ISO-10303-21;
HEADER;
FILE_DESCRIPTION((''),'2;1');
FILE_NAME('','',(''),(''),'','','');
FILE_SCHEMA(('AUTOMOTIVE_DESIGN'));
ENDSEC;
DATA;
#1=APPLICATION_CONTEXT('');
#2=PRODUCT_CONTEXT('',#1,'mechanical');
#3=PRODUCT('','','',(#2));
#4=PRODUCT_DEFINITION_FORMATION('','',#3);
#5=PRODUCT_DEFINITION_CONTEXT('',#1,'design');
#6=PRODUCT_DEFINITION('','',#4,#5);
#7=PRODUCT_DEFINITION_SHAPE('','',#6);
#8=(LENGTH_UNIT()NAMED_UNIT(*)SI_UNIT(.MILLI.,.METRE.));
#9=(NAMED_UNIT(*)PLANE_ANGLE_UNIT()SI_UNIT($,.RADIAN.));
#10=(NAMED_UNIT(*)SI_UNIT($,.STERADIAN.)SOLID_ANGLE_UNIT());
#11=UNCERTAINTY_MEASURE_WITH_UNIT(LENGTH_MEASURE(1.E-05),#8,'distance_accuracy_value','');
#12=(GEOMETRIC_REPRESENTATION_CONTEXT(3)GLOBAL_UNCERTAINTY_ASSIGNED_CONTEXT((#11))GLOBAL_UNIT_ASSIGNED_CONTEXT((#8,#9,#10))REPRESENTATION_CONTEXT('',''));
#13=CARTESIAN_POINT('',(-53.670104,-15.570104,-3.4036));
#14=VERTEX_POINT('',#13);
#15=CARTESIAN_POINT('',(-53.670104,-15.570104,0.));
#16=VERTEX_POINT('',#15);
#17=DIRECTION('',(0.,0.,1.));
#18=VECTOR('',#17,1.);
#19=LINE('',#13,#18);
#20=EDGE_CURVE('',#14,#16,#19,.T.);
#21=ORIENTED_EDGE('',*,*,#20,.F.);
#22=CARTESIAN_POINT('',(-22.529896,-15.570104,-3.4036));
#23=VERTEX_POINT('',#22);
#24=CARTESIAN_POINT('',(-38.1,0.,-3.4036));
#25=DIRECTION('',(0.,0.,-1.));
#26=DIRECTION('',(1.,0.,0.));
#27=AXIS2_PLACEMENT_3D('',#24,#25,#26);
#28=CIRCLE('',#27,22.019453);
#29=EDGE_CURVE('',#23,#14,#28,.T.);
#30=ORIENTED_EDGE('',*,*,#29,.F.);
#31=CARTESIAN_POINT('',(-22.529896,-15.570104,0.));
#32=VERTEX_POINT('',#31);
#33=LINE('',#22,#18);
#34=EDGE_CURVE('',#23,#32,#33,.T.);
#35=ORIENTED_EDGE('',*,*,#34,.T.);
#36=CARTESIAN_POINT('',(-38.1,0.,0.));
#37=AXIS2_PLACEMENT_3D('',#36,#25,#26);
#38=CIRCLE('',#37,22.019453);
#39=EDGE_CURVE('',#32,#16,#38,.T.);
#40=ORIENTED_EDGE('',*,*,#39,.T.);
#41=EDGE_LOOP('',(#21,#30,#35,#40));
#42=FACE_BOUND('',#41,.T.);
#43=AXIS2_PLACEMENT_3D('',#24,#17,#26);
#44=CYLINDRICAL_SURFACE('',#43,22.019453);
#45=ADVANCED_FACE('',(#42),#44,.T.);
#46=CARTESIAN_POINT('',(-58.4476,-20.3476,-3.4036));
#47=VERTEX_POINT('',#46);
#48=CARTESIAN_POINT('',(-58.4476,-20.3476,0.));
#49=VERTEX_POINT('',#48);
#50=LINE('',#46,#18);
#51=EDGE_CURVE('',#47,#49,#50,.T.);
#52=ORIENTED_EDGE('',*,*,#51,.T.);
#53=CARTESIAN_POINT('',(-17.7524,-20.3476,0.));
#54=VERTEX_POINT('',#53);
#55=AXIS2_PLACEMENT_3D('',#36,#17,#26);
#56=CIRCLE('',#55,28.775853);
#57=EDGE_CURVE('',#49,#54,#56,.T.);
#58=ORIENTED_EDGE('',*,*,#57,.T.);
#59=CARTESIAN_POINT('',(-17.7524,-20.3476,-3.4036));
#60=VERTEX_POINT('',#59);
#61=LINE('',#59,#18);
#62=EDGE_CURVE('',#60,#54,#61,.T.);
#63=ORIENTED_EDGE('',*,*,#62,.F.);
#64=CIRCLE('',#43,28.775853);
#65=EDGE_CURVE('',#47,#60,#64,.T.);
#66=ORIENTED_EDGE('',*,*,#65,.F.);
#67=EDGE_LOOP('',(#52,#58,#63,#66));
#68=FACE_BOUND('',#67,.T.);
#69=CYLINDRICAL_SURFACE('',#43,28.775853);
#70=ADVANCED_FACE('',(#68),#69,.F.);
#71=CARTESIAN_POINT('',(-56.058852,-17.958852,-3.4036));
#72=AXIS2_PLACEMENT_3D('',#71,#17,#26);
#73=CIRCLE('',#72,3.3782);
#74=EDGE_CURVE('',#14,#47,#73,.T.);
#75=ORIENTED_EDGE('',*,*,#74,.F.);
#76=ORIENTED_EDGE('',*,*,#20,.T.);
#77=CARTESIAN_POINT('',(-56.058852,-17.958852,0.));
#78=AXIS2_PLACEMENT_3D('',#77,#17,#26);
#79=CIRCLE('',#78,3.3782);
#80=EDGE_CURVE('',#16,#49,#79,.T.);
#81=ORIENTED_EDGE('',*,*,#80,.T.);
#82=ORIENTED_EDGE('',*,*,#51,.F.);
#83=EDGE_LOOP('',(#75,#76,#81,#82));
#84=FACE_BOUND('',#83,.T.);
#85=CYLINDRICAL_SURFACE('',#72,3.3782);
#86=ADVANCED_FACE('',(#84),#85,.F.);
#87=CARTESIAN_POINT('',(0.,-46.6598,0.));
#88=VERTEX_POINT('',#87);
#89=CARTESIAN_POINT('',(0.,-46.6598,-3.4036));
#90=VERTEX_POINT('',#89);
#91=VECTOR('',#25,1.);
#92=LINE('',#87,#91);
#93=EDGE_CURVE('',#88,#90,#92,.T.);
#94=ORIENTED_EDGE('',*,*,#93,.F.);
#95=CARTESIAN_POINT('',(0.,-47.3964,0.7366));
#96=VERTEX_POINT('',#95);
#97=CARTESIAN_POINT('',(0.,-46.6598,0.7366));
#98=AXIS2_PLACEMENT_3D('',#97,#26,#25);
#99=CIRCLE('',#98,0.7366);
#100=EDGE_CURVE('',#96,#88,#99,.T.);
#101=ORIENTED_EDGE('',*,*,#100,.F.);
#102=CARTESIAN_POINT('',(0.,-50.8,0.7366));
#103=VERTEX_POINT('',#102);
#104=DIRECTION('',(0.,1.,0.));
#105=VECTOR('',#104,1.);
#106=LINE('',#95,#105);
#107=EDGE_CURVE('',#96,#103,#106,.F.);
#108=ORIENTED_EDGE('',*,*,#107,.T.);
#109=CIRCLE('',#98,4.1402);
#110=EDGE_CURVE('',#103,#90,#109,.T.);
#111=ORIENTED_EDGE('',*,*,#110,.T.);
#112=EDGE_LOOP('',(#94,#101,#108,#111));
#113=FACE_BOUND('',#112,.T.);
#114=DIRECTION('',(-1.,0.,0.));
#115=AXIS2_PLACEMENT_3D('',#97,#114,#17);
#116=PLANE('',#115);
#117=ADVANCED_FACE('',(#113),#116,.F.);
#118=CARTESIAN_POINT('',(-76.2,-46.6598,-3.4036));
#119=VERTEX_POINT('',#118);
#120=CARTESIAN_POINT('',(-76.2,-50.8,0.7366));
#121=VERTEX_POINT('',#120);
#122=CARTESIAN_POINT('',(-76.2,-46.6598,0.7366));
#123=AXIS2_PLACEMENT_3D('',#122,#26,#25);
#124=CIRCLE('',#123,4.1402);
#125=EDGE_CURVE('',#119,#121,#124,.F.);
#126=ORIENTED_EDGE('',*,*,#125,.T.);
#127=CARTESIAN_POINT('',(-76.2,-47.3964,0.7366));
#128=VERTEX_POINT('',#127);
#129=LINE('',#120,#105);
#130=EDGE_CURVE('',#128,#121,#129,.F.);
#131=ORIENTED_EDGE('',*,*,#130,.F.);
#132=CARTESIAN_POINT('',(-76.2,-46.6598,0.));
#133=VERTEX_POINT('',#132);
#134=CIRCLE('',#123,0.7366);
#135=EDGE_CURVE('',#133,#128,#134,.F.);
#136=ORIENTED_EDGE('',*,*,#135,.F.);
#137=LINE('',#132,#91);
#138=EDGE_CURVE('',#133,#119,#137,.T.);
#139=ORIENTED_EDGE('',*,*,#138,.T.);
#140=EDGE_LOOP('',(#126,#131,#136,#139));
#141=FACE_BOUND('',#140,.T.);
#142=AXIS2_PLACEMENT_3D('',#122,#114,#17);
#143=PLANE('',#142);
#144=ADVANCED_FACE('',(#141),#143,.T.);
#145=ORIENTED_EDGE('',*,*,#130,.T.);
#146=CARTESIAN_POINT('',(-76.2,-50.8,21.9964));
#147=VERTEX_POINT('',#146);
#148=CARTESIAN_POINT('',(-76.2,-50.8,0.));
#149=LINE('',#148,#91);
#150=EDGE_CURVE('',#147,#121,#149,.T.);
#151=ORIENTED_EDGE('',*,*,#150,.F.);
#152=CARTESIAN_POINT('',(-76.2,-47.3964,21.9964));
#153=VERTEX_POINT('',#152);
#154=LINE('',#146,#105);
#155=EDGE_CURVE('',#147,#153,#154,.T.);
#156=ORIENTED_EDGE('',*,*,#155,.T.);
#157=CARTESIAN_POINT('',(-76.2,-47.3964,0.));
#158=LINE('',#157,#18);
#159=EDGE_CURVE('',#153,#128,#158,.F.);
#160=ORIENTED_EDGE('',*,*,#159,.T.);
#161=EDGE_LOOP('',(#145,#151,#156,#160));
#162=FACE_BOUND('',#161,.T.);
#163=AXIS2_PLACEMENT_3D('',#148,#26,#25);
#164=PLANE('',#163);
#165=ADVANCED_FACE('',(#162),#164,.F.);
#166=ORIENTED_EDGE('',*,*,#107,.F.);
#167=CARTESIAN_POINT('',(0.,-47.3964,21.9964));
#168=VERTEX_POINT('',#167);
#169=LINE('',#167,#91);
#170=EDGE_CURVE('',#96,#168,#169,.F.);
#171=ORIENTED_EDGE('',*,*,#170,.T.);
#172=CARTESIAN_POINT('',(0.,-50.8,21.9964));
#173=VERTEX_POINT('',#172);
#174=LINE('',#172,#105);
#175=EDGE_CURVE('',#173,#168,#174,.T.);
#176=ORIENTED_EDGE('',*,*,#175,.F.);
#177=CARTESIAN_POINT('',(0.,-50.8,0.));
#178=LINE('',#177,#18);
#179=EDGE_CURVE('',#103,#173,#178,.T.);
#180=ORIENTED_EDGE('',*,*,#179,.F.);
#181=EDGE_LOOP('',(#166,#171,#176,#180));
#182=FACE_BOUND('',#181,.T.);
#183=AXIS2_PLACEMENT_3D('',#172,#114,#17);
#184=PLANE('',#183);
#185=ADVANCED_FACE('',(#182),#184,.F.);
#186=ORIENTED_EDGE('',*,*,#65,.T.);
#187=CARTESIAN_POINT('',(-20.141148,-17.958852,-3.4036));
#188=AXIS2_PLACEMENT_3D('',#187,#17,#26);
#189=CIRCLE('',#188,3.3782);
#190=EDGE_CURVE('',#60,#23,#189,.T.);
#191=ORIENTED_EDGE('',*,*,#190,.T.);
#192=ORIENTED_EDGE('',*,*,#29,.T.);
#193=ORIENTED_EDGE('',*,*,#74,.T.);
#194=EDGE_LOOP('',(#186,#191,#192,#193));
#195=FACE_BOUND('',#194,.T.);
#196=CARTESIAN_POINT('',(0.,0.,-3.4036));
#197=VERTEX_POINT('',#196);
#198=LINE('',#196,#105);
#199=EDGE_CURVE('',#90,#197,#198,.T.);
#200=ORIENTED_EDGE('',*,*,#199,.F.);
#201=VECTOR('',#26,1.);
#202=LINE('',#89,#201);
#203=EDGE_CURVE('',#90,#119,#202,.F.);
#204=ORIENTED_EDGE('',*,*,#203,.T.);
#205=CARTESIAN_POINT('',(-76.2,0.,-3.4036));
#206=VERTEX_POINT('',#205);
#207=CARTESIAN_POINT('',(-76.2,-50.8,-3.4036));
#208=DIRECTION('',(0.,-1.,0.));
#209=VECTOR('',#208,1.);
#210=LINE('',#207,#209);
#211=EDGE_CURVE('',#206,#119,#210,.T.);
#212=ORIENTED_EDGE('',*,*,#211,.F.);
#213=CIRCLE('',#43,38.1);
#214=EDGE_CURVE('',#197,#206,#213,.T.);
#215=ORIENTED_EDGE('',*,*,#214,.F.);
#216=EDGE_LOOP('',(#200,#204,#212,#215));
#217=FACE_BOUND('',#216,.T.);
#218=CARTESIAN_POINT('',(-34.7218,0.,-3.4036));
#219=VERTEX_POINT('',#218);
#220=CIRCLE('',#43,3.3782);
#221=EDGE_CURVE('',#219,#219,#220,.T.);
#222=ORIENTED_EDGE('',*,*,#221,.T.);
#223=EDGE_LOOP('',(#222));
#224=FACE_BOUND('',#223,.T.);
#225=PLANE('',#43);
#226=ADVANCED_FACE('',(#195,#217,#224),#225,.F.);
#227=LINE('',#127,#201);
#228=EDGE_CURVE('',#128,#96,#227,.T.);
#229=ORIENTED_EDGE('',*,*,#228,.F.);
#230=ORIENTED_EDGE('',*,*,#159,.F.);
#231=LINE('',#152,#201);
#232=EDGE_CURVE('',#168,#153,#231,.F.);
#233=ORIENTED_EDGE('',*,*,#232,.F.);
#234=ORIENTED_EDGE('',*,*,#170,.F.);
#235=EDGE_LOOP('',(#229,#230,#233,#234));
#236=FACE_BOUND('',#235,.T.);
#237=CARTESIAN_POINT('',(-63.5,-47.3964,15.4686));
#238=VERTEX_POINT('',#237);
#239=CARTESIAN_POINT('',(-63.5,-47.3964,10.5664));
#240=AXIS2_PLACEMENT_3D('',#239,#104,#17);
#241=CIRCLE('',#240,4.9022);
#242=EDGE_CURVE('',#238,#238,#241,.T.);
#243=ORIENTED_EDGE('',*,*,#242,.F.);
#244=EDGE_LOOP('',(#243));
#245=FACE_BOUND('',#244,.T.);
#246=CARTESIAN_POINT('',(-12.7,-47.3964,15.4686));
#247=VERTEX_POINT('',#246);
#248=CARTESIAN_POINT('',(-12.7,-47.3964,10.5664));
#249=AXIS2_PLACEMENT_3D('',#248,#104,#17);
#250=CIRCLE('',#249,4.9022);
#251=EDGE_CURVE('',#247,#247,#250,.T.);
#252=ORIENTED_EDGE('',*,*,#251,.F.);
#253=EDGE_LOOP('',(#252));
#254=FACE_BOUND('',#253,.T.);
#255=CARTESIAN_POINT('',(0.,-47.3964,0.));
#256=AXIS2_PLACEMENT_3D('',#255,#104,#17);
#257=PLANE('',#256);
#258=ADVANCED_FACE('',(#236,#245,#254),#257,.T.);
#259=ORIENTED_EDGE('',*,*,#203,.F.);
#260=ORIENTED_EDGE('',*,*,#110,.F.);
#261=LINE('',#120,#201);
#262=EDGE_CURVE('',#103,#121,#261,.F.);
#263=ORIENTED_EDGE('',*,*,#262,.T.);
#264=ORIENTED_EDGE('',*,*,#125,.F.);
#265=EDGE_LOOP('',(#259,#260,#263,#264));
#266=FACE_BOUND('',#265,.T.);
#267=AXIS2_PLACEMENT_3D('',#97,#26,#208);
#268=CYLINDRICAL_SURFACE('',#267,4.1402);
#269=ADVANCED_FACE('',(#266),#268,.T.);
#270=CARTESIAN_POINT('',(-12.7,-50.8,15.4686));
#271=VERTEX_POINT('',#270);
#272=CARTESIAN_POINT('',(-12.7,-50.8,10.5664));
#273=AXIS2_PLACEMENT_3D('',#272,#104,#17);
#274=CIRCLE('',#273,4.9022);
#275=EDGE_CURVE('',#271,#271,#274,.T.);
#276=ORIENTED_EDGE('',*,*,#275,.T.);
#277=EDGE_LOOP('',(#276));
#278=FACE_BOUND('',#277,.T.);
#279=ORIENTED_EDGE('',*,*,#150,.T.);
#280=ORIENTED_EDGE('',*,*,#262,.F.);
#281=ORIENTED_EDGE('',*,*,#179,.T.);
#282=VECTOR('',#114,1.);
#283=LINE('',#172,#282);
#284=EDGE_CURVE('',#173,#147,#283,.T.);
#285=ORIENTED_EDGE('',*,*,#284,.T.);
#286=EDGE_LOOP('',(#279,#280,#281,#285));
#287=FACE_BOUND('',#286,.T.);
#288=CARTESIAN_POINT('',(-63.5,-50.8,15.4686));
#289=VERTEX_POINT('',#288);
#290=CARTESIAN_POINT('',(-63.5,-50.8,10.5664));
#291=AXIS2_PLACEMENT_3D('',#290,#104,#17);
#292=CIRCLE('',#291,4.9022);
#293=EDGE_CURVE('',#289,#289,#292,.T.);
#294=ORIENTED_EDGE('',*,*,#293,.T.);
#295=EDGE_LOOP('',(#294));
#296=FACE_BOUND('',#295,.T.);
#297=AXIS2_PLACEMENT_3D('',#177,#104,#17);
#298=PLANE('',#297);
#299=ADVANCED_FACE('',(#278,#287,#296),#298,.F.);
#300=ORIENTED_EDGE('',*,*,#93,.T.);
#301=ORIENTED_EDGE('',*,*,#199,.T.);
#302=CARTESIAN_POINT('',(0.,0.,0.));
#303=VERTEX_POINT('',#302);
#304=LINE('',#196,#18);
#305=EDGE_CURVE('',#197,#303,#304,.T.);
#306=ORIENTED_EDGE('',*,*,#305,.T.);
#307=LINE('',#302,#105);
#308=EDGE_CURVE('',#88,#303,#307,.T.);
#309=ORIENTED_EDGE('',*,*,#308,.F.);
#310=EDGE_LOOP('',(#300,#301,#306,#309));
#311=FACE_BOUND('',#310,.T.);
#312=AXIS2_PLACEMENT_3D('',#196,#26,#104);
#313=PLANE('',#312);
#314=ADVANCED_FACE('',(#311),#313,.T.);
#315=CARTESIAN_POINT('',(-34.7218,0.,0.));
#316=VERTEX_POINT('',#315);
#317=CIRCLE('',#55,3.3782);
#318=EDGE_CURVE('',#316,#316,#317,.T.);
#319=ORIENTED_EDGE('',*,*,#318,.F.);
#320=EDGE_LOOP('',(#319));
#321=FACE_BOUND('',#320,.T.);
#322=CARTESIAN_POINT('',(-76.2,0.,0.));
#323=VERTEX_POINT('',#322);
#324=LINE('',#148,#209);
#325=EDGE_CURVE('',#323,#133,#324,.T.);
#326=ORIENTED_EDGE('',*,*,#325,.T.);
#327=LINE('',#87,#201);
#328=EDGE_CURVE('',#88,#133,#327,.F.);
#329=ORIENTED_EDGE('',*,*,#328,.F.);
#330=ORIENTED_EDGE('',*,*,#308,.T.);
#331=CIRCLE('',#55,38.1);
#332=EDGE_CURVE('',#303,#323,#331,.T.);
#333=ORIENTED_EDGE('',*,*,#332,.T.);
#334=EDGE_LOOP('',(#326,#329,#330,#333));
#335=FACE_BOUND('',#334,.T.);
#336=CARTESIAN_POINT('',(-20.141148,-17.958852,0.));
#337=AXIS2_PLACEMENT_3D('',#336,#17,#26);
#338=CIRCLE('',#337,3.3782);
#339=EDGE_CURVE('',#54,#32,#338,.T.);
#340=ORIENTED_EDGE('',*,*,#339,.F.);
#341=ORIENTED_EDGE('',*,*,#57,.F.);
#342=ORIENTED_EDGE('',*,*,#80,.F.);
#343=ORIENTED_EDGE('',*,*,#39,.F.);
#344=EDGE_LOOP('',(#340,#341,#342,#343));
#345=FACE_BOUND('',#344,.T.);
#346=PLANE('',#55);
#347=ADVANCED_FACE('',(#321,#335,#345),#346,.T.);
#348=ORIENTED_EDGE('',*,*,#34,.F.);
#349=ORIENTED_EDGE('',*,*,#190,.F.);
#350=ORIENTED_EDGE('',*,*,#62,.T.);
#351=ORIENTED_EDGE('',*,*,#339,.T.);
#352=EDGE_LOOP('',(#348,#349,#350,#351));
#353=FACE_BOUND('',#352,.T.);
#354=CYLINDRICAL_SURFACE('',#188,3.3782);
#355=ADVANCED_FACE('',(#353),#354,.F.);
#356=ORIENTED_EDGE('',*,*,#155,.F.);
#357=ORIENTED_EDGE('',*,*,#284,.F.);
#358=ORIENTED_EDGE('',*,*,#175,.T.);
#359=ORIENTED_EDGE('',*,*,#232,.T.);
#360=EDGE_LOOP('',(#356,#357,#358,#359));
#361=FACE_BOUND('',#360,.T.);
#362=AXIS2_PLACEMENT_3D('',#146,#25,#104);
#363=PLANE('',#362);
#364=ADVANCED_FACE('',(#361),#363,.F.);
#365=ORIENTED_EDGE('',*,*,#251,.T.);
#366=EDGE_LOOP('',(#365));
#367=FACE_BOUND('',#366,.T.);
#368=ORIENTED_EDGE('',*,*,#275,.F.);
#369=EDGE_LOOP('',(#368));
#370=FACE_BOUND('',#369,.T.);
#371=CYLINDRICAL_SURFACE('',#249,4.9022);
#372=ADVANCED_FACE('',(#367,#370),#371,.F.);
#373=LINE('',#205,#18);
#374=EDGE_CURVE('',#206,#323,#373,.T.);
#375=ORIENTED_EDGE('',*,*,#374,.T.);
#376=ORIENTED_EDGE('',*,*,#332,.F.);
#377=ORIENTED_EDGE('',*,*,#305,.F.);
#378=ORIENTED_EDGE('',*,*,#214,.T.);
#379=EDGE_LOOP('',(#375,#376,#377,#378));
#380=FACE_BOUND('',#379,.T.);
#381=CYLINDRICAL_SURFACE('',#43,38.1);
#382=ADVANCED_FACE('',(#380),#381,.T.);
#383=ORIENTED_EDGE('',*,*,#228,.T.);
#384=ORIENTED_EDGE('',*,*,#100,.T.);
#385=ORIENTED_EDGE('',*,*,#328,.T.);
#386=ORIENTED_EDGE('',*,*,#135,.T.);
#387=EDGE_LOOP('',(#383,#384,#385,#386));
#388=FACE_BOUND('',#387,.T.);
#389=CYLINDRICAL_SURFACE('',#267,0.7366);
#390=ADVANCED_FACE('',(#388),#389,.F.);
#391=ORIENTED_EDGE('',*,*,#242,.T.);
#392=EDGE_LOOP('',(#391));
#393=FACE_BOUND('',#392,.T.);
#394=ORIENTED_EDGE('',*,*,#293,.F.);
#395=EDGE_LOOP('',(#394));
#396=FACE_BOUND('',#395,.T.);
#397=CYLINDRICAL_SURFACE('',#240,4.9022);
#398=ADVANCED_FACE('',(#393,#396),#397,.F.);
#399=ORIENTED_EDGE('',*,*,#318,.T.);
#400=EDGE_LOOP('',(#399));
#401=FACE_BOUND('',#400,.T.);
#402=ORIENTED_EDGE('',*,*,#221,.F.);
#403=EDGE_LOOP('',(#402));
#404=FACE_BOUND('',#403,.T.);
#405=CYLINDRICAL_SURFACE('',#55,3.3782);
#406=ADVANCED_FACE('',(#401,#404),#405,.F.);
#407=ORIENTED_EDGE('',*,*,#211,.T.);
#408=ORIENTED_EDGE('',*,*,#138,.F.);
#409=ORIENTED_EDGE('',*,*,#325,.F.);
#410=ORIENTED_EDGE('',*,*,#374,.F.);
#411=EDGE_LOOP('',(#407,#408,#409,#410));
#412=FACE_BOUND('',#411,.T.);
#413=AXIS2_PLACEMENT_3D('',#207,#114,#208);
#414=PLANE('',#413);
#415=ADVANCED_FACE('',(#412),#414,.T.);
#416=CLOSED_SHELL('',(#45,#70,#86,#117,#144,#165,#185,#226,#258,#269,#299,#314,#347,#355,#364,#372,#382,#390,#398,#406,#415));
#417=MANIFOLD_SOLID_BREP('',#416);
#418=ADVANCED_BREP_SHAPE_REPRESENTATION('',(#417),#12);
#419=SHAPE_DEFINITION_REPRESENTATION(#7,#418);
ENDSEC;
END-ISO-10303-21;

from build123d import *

# Parameters (mm, degrees)
BASE_FLANGE1_DEPTH                = 3.4036
EDGE_FLANGE2_STRIP_W              = 15.0876
EDGE_FLANGE2_STRIP_H              = 3.4036
EDGE_FLANGE2_STRIP_CUT_DEPTH      = 76.2
EDGE_FLANGE2_DEPTH                = 76.2
F_1_4_START                       = -50.8
F_1_4_CLEARANCE_HOLE3_OUTLINE_R   = 4.9022
F_1_4_CLEARANCE_HOLE3_DEPTH       = 3.4036
F_1_4_START_2                     = -3.4036
F_1_4_CLEARANCE_HOLE3_2_OUTLINE_R = 3.3782
F_1_4_CLEARANCE_HOLE3_2_DEPTH     = 3.4036
CUT_EXTRUDE1_DEPTH                = 95.185570089


# Read off the part's stored shape, not the designer's step: 1/4 Clearance Hole3
# Sheet-metal steps are written as plain solids
with BuildPart() as part:
    # Sketch1 → Base-Flange1 (new body)
    with BuildSketch(Plane.XY):
        with BuildLine():
            Line((0, 0), (0, -50.8))
            Line((0, -50.8), (-76.2, -50.8))
            Line((-76.2, -50.8), (-76.2, 0))
            ThreePointArc((-76.2, 0), (-38.1, 38.1), (0, 0))
        make_face()
    extrude(amount=-BASE_FLANGE1_DEPTH)

    # Edge-Flange2 strip (across the edge) → Edge-Flange2 strip cut (cut)
    with BuildSketch(Plane(origin=(-76.2, -50.8, 0), x_dir=(0, 1, 0), z_dir=(1, 0, 0))):
        with Locations((-3.4036, -1.7018)):
            Rectangle(EDGE_FLANGE2_STRIP_W, EDGE_FLANGE2_STRIP_H)
    extrude(amount=EDGE_FLANGE2_STRIP_CUT_DEPTH, mode=Mode.SUBTRACT)

    # Edge-Flange2 section (across the edge) → Edge-Flange2 (add)
    with BuildSketch(Plane(origin=(-76.2, -50.8, 0), x_dir=(0, 1, 0), z_dir=(1, 0, 0))):
        with BuildLine():
            Line((0, 0.7366), (0, 21.9964))
            Line((0, 21.9964), (3.4036, 21.9964))
            Line((3.4036, 21.9964), (3.4036, 0.7366))
            ThreePointArc((3.4036, 0.7366), (3.619345145, 0.215745145), (4.1402, 0))
            Line((4.1402, 0), (4.1402, -3.4036))
            ThreePointArc((4.1402, -3.4036), (1.212636505, -2.190963495), (0, 0.7366))
        make_face()
    extrude(amount=EDGE_FLANGE2_DEPTH)

    # 1/4 Clearance Hole3 outline → 1/4 Clearance Hole3 (cut)
    with BuildSketch(Plane(origin=(0, 0, 0), x_dir=(1, 0, 0), z_dir=(0, 1, 0)).offset(F_1_4_START)):
        with Locations((-12.7, -10.5664)):
            Circle(F_1_4_CLEARANCE_HOLE3_OUTLINE_R)
        with Locations((-63.5, -10.5664)):
            Circle(F_1_4_CLEARANCE_HOLE3_OUTLINE_R)
    extrude(amount=F_1_4_CLEARANCE_HOLE3_DEPTH, mode=Mode.SUBTRACT)

    # 1_4 Clearance Hole3 2 outline → 1_4 Clearance Hole3 2 (cut)
    with BuildSketch(Plane.XY.offset(F_1_4_START_2)):
        with Locations((-38.1, 0)):
            Circle(F_1_4_CLEARANCE_HOLE3_2_OUTLINE_R)
    extrude(amount=F_1_4_CLEARANCE_HOLE3_2_DEPTH, mode=Mode.SUBTRACT)

    # Sketch25 → Cut-Extrude1 (cut, through all)
    with BuildSketch(Plane.XY):
        with BuildLine():
            ThreePointArc((-58.447600474, -20.347600474), (-38.1, -28.775852552), (-17.752399526, -20.347600474))
            ThreePointArc((-17.752399526, -20.347600474), (-17.752399526, -15.570104217), (-22.529895783, -15.570104217))
            ThreePointArc((-22.529895783, -15.570104217), (-38.1, -22.019452552), (-53.670104217, -15.570104217))
            ThreePointArc((-53.670104217, -15.570104217), (-58.447600474, -15.570104217), (-58.447600474, -20.347600474))
        make_face()
    extrude(amount=-CUT_EXTRUDE1_DEPTH, mode=Mode.SUBTRACT)


solid = part.part
